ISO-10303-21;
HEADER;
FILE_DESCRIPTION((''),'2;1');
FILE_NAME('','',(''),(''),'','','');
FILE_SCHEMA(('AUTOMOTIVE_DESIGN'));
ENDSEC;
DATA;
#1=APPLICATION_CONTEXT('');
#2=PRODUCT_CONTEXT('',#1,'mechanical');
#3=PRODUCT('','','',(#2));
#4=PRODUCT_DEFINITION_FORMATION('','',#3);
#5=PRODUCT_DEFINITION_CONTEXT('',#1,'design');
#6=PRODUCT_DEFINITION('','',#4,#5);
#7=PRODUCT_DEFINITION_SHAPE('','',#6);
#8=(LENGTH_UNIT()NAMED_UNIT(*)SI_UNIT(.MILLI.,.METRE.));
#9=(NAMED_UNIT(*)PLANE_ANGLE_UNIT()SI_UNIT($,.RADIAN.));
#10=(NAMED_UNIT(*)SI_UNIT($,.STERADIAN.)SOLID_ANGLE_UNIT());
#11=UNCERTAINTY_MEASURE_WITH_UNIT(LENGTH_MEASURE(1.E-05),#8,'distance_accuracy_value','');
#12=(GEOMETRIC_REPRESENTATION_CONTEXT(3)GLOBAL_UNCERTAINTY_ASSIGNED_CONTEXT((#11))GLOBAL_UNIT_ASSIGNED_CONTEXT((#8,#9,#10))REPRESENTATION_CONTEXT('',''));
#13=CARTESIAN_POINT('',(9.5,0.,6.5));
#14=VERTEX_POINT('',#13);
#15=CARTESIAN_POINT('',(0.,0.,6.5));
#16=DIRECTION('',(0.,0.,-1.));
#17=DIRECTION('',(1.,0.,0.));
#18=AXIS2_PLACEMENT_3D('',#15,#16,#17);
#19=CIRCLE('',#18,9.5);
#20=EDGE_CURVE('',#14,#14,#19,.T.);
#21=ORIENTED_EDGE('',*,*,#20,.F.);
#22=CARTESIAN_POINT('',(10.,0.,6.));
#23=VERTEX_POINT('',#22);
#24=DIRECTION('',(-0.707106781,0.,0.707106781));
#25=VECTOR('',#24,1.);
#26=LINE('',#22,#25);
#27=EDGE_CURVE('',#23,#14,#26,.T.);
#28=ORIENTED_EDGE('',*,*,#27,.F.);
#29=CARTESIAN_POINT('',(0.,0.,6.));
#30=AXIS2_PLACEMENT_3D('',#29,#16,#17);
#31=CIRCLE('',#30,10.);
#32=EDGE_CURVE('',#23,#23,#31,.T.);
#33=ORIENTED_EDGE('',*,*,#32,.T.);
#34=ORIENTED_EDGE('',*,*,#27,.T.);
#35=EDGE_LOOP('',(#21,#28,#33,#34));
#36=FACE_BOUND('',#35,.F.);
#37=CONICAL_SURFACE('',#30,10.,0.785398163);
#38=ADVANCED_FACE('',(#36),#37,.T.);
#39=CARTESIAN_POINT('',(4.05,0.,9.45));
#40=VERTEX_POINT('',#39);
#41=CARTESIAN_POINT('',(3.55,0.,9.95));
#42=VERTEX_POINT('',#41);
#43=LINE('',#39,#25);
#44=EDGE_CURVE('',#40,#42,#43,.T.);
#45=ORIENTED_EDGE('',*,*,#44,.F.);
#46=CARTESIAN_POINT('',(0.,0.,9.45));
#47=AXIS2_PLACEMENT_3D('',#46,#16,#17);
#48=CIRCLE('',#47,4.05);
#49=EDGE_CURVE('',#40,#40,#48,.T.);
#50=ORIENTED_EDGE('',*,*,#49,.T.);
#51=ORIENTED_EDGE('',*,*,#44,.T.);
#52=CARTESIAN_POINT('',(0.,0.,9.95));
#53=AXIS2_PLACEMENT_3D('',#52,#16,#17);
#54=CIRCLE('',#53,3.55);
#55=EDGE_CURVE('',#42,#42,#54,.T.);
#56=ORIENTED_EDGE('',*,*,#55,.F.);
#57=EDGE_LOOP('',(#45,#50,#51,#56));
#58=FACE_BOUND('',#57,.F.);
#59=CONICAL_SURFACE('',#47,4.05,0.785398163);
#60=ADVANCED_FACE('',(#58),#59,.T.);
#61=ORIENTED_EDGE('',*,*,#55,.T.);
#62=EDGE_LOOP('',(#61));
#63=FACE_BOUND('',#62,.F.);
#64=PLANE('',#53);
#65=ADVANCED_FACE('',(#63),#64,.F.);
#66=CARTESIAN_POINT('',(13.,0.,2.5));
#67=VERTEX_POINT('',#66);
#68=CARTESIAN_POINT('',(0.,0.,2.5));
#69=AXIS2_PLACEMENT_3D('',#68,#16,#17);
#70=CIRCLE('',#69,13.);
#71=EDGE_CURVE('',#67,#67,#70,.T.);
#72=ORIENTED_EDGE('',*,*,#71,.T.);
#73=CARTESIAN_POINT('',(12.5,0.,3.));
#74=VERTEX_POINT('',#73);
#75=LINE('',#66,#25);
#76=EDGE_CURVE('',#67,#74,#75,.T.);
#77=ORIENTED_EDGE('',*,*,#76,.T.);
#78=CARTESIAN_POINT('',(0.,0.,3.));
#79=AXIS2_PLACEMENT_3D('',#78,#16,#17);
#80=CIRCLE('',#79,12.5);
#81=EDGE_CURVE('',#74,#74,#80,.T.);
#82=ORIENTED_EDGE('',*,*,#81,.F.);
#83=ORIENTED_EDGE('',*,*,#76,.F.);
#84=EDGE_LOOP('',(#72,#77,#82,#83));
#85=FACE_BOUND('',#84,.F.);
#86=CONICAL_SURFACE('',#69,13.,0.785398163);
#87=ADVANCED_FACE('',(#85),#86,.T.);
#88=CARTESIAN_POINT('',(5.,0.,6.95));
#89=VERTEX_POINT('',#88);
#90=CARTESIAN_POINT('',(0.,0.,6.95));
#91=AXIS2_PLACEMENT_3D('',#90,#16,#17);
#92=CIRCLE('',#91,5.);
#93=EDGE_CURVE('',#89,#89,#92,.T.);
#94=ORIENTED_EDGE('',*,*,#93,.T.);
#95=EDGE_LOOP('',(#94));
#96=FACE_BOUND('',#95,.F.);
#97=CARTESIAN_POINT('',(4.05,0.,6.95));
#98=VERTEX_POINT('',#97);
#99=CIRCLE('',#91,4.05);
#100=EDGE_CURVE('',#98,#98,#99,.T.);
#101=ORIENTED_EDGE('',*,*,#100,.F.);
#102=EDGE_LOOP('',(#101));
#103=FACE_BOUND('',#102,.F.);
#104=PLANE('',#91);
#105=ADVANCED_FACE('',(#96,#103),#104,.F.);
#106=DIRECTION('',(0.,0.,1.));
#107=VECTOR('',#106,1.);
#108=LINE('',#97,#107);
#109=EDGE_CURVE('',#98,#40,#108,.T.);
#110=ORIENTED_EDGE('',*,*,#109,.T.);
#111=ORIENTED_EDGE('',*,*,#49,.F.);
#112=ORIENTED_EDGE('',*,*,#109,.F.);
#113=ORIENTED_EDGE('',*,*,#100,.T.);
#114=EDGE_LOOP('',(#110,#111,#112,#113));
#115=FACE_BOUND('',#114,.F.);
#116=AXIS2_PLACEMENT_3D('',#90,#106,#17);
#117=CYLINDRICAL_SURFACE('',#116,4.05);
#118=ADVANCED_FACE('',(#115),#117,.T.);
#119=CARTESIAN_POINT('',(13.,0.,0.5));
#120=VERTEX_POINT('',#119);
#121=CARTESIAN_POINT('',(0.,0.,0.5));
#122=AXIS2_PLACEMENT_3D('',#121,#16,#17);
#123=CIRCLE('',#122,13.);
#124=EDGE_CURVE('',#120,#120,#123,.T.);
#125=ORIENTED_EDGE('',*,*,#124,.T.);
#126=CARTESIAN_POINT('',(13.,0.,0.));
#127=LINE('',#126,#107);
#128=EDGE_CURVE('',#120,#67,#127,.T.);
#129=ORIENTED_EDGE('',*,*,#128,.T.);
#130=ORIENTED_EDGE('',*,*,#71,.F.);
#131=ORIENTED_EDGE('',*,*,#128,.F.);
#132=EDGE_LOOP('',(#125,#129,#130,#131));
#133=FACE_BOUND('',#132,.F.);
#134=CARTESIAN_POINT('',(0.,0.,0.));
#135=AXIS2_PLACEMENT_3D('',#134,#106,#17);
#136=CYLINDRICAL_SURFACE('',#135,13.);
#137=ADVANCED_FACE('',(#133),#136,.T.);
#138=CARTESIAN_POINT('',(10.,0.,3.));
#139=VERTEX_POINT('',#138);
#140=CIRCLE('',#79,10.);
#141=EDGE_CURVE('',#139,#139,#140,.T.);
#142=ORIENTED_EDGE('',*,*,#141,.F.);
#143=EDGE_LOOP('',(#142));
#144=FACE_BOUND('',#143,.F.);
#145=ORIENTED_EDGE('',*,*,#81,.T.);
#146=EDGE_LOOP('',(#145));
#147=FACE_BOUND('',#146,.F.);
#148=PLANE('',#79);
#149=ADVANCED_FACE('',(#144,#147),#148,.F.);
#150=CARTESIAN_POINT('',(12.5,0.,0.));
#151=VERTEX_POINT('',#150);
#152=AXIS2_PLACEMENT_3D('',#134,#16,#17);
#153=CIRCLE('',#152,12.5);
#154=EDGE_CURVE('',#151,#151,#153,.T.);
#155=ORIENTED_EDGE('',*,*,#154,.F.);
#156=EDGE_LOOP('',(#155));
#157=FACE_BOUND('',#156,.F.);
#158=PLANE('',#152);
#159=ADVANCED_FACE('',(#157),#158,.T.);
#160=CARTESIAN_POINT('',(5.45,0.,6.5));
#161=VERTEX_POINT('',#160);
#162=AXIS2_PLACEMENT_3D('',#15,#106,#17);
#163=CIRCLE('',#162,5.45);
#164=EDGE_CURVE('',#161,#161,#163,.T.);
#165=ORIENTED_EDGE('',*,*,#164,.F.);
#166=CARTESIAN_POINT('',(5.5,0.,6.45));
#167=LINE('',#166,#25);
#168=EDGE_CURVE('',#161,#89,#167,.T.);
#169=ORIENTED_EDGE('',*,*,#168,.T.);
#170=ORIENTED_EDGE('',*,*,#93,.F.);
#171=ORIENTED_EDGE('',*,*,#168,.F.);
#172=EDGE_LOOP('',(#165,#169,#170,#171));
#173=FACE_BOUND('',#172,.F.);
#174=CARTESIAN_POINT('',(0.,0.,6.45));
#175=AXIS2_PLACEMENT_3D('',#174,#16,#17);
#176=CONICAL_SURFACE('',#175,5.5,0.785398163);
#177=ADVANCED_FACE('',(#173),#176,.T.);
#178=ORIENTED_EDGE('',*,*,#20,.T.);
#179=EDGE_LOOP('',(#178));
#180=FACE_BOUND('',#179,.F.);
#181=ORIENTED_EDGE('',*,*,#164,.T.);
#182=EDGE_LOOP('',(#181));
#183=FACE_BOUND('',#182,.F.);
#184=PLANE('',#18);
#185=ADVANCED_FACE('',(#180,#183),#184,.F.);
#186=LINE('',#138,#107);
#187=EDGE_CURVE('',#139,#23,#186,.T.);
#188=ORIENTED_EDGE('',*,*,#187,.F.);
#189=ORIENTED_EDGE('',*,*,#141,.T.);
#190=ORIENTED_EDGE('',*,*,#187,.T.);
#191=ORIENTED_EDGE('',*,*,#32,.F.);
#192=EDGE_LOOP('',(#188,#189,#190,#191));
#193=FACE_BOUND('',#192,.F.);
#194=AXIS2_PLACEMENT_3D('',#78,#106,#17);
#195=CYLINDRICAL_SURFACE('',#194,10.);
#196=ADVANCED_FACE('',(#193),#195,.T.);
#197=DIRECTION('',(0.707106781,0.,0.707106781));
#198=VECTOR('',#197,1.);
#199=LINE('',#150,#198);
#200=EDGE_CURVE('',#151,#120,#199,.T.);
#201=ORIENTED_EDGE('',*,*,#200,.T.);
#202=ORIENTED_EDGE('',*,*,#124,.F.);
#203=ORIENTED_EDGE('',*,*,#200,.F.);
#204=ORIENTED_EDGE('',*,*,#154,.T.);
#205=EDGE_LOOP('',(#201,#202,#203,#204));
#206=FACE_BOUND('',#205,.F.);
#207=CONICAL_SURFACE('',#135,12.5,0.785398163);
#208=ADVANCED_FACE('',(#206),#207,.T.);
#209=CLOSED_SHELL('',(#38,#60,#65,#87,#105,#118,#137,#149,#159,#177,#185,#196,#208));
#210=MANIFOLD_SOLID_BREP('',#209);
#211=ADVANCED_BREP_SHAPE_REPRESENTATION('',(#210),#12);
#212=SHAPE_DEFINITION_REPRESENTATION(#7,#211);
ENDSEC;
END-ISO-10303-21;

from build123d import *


# Not quite as in the source:
# - a fillet or chamfer that OpenCascade refuses, or shapes differently, is made with other operations: its cross-section is extruded or revolved along the edge and cut away or added


with BuildPart() as f1:
    # F0 (on Front) → F1 (revolve)
    with BuildSketch(Plane.XZ):
        Polygon((0, 9.95), (0, 0), (13, 0), (13, 3), (10, 3), (10, 6.5), (5.5, 6.5), (5.5, 6.95), (4.05, 6.95), (4.05, 9.95), align=None)
    revolve(axis=Axis((0, 0, 4.975), (0, 0, -1)))

    # F2: chamfer of 0.5 on 5 edges, made by hand

    # F2_s1 → F2_t2 (revolve, cut)
    with BuildSketch(Plane.XZ):
        Polygon((12.5, 0), (13, 0.5), (13, 0), align=None)
    revolve(axis=Axis((0, 0, 0), (0, 0, -1)), mode=Mode.SUBTRACT)

    # F2_s3 → F2_t4 (revolve, cut)
    with BuildSketch(Plane.XZ):
        Polygon((13, 2.5), (12.5, 3), (13, 3), align=None)
    revolve(axis=Axis((0, 0, 3), (0, 0, -1)), mode=Mode.SUBTRACT)

    # F2_s5 → F2_t6 (revolve, cut)
    with BuildSketch(Plane.XZ):
        Polygon((10, 6), (9.5, 6.5), (10, 6.5), align=None)
    revolve(axis=Axis((0, 0, 6.5), (0, 0, -1)), mode=Mode.SUBTRACT)


with BuildPart() as f2_tool8:
    # F2_s9 → F2_t10 (revolve)
    with BuildSketch(Plane.XZ):
        Polygon((5.5, 6.45), (5, 6.95), (5.5, 6.95), align=None)
    revolve(axis=Axis((0, 0, 6.95), (0, 0, -1)))

    split(bisect_by=Plane.XY.offset(6.5), keep=Keep.TOP)


with BuildPart() as f1_1:
    add(f1.part)

    # F2_t7: cut F2_tool8
    add(f2_tool8.part, mode=Mode.SUBTRACT)

    # F2_s12 → F2_t13 (revolve, cut)
    with BuildSketch(Plane.XZ):
        Polygon((4.05, 9.45), (3.55, 9.95), (4.05, 9.95), align=None)
    revolve(axis=Axis((0, 0, 9.95), (0, 0, -1)), mode=Mode.SUBTRACT)


solid = f1_1.part
